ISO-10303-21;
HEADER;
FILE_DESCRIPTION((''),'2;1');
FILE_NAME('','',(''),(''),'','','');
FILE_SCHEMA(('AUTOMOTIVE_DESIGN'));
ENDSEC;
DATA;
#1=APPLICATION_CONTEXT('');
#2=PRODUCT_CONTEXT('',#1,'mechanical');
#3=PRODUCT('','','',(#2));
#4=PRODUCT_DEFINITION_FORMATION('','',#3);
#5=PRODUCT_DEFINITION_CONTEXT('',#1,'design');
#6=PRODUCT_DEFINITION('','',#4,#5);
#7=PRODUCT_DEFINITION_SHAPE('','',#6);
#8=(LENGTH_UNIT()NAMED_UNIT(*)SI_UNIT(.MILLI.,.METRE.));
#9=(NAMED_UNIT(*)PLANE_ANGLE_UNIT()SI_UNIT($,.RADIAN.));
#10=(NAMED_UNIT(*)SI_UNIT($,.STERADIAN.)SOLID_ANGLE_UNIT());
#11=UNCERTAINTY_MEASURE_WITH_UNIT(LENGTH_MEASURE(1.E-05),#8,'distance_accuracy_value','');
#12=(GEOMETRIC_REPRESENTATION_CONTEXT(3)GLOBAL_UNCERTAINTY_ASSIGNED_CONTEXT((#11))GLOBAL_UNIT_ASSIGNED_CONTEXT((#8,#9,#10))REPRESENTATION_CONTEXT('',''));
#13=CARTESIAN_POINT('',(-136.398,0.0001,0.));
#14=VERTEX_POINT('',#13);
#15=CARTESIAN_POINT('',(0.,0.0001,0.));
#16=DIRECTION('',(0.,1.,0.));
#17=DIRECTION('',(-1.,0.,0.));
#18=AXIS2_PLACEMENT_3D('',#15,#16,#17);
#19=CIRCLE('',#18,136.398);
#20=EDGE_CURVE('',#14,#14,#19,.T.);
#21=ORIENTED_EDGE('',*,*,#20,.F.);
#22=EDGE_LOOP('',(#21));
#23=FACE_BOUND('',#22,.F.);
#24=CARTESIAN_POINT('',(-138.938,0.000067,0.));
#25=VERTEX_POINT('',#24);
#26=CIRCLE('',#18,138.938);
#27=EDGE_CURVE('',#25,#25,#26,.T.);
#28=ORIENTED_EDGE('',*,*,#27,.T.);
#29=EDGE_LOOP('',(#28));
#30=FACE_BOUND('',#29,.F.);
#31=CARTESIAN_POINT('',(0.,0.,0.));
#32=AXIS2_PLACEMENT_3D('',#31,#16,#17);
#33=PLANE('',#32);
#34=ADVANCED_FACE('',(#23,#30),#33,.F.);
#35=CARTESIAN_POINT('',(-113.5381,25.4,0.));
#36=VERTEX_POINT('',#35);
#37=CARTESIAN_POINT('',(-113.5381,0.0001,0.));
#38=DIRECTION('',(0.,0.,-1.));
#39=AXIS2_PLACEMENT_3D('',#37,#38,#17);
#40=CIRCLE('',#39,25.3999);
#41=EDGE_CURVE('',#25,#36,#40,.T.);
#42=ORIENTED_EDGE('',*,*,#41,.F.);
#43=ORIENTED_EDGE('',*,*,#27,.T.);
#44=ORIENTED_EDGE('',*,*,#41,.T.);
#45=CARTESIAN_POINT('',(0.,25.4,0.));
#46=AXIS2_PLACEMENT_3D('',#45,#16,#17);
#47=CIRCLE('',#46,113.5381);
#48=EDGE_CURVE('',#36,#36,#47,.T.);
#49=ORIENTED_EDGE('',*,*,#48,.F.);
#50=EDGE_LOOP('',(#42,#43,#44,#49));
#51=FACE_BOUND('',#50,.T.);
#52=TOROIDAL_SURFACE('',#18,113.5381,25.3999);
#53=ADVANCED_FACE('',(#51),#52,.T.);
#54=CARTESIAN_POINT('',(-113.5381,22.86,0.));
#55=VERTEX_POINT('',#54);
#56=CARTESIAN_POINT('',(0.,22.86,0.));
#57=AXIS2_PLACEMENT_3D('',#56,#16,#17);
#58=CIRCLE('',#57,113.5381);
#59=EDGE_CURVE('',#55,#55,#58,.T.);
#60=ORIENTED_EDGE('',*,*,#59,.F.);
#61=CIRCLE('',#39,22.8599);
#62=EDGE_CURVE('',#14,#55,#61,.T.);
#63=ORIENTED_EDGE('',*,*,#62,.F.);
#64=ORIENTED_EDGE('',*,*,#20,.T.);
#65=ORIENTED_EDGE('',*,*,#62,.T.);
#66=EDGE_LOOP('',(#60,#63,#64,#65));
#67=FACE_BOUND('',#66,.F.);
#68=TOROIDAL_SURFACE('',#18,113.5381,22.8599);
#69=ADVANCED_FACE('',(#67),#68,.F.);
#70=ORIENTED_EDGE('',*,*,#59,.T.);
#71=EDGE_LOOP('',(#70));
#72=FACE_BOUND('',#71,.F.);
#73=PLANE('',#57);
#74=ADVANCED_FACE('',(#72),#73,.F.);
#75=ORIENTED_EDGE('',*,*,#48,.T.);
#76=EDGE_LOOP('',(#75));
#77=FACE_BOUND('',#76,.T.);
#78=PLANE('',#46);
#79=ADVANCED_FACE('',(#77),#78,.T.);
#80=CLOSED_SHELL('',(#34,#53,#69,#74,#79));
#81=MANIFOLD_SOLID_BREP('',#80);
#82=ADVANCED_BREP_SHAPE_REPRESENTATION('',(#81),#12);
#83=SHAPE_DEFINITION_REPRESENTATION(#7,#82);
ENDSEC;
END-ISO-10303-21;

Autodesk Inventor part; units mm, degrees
ref_plane "YZ Plane" through (0, 0, 0) normal (1, 0, 0) x (0, 1, 0)
ref_plane "XZ Plane" through (0, 0, 0) normal (0, 1, 0) x (-1, 0, 0)
ref_plane "XY Plane" through (0, 0, 0) normal (0, 0, 1) x (1, 0, 0)
sketch "Sketch1" plane through (0, 0, 0) normal (0, 1, 0) x (-1, 0, 0)
  circle A0 centre (0, 0) radius 138.938
  dimension "d0" = 277.876
extrude "Extrusion1" add sketch "Sketch1" along normal blind 25.4
fillet "Fillet1" radius 25.4 1 edges at (138.938, 25.4, 0)
shell "Shell1" thickness 2.54 removed faces 2 at (78.7519, 0.0001, -114.4636) at (28.4576, 0, -60.367)
properties part number "Frisbee" material "Polypropylene"
